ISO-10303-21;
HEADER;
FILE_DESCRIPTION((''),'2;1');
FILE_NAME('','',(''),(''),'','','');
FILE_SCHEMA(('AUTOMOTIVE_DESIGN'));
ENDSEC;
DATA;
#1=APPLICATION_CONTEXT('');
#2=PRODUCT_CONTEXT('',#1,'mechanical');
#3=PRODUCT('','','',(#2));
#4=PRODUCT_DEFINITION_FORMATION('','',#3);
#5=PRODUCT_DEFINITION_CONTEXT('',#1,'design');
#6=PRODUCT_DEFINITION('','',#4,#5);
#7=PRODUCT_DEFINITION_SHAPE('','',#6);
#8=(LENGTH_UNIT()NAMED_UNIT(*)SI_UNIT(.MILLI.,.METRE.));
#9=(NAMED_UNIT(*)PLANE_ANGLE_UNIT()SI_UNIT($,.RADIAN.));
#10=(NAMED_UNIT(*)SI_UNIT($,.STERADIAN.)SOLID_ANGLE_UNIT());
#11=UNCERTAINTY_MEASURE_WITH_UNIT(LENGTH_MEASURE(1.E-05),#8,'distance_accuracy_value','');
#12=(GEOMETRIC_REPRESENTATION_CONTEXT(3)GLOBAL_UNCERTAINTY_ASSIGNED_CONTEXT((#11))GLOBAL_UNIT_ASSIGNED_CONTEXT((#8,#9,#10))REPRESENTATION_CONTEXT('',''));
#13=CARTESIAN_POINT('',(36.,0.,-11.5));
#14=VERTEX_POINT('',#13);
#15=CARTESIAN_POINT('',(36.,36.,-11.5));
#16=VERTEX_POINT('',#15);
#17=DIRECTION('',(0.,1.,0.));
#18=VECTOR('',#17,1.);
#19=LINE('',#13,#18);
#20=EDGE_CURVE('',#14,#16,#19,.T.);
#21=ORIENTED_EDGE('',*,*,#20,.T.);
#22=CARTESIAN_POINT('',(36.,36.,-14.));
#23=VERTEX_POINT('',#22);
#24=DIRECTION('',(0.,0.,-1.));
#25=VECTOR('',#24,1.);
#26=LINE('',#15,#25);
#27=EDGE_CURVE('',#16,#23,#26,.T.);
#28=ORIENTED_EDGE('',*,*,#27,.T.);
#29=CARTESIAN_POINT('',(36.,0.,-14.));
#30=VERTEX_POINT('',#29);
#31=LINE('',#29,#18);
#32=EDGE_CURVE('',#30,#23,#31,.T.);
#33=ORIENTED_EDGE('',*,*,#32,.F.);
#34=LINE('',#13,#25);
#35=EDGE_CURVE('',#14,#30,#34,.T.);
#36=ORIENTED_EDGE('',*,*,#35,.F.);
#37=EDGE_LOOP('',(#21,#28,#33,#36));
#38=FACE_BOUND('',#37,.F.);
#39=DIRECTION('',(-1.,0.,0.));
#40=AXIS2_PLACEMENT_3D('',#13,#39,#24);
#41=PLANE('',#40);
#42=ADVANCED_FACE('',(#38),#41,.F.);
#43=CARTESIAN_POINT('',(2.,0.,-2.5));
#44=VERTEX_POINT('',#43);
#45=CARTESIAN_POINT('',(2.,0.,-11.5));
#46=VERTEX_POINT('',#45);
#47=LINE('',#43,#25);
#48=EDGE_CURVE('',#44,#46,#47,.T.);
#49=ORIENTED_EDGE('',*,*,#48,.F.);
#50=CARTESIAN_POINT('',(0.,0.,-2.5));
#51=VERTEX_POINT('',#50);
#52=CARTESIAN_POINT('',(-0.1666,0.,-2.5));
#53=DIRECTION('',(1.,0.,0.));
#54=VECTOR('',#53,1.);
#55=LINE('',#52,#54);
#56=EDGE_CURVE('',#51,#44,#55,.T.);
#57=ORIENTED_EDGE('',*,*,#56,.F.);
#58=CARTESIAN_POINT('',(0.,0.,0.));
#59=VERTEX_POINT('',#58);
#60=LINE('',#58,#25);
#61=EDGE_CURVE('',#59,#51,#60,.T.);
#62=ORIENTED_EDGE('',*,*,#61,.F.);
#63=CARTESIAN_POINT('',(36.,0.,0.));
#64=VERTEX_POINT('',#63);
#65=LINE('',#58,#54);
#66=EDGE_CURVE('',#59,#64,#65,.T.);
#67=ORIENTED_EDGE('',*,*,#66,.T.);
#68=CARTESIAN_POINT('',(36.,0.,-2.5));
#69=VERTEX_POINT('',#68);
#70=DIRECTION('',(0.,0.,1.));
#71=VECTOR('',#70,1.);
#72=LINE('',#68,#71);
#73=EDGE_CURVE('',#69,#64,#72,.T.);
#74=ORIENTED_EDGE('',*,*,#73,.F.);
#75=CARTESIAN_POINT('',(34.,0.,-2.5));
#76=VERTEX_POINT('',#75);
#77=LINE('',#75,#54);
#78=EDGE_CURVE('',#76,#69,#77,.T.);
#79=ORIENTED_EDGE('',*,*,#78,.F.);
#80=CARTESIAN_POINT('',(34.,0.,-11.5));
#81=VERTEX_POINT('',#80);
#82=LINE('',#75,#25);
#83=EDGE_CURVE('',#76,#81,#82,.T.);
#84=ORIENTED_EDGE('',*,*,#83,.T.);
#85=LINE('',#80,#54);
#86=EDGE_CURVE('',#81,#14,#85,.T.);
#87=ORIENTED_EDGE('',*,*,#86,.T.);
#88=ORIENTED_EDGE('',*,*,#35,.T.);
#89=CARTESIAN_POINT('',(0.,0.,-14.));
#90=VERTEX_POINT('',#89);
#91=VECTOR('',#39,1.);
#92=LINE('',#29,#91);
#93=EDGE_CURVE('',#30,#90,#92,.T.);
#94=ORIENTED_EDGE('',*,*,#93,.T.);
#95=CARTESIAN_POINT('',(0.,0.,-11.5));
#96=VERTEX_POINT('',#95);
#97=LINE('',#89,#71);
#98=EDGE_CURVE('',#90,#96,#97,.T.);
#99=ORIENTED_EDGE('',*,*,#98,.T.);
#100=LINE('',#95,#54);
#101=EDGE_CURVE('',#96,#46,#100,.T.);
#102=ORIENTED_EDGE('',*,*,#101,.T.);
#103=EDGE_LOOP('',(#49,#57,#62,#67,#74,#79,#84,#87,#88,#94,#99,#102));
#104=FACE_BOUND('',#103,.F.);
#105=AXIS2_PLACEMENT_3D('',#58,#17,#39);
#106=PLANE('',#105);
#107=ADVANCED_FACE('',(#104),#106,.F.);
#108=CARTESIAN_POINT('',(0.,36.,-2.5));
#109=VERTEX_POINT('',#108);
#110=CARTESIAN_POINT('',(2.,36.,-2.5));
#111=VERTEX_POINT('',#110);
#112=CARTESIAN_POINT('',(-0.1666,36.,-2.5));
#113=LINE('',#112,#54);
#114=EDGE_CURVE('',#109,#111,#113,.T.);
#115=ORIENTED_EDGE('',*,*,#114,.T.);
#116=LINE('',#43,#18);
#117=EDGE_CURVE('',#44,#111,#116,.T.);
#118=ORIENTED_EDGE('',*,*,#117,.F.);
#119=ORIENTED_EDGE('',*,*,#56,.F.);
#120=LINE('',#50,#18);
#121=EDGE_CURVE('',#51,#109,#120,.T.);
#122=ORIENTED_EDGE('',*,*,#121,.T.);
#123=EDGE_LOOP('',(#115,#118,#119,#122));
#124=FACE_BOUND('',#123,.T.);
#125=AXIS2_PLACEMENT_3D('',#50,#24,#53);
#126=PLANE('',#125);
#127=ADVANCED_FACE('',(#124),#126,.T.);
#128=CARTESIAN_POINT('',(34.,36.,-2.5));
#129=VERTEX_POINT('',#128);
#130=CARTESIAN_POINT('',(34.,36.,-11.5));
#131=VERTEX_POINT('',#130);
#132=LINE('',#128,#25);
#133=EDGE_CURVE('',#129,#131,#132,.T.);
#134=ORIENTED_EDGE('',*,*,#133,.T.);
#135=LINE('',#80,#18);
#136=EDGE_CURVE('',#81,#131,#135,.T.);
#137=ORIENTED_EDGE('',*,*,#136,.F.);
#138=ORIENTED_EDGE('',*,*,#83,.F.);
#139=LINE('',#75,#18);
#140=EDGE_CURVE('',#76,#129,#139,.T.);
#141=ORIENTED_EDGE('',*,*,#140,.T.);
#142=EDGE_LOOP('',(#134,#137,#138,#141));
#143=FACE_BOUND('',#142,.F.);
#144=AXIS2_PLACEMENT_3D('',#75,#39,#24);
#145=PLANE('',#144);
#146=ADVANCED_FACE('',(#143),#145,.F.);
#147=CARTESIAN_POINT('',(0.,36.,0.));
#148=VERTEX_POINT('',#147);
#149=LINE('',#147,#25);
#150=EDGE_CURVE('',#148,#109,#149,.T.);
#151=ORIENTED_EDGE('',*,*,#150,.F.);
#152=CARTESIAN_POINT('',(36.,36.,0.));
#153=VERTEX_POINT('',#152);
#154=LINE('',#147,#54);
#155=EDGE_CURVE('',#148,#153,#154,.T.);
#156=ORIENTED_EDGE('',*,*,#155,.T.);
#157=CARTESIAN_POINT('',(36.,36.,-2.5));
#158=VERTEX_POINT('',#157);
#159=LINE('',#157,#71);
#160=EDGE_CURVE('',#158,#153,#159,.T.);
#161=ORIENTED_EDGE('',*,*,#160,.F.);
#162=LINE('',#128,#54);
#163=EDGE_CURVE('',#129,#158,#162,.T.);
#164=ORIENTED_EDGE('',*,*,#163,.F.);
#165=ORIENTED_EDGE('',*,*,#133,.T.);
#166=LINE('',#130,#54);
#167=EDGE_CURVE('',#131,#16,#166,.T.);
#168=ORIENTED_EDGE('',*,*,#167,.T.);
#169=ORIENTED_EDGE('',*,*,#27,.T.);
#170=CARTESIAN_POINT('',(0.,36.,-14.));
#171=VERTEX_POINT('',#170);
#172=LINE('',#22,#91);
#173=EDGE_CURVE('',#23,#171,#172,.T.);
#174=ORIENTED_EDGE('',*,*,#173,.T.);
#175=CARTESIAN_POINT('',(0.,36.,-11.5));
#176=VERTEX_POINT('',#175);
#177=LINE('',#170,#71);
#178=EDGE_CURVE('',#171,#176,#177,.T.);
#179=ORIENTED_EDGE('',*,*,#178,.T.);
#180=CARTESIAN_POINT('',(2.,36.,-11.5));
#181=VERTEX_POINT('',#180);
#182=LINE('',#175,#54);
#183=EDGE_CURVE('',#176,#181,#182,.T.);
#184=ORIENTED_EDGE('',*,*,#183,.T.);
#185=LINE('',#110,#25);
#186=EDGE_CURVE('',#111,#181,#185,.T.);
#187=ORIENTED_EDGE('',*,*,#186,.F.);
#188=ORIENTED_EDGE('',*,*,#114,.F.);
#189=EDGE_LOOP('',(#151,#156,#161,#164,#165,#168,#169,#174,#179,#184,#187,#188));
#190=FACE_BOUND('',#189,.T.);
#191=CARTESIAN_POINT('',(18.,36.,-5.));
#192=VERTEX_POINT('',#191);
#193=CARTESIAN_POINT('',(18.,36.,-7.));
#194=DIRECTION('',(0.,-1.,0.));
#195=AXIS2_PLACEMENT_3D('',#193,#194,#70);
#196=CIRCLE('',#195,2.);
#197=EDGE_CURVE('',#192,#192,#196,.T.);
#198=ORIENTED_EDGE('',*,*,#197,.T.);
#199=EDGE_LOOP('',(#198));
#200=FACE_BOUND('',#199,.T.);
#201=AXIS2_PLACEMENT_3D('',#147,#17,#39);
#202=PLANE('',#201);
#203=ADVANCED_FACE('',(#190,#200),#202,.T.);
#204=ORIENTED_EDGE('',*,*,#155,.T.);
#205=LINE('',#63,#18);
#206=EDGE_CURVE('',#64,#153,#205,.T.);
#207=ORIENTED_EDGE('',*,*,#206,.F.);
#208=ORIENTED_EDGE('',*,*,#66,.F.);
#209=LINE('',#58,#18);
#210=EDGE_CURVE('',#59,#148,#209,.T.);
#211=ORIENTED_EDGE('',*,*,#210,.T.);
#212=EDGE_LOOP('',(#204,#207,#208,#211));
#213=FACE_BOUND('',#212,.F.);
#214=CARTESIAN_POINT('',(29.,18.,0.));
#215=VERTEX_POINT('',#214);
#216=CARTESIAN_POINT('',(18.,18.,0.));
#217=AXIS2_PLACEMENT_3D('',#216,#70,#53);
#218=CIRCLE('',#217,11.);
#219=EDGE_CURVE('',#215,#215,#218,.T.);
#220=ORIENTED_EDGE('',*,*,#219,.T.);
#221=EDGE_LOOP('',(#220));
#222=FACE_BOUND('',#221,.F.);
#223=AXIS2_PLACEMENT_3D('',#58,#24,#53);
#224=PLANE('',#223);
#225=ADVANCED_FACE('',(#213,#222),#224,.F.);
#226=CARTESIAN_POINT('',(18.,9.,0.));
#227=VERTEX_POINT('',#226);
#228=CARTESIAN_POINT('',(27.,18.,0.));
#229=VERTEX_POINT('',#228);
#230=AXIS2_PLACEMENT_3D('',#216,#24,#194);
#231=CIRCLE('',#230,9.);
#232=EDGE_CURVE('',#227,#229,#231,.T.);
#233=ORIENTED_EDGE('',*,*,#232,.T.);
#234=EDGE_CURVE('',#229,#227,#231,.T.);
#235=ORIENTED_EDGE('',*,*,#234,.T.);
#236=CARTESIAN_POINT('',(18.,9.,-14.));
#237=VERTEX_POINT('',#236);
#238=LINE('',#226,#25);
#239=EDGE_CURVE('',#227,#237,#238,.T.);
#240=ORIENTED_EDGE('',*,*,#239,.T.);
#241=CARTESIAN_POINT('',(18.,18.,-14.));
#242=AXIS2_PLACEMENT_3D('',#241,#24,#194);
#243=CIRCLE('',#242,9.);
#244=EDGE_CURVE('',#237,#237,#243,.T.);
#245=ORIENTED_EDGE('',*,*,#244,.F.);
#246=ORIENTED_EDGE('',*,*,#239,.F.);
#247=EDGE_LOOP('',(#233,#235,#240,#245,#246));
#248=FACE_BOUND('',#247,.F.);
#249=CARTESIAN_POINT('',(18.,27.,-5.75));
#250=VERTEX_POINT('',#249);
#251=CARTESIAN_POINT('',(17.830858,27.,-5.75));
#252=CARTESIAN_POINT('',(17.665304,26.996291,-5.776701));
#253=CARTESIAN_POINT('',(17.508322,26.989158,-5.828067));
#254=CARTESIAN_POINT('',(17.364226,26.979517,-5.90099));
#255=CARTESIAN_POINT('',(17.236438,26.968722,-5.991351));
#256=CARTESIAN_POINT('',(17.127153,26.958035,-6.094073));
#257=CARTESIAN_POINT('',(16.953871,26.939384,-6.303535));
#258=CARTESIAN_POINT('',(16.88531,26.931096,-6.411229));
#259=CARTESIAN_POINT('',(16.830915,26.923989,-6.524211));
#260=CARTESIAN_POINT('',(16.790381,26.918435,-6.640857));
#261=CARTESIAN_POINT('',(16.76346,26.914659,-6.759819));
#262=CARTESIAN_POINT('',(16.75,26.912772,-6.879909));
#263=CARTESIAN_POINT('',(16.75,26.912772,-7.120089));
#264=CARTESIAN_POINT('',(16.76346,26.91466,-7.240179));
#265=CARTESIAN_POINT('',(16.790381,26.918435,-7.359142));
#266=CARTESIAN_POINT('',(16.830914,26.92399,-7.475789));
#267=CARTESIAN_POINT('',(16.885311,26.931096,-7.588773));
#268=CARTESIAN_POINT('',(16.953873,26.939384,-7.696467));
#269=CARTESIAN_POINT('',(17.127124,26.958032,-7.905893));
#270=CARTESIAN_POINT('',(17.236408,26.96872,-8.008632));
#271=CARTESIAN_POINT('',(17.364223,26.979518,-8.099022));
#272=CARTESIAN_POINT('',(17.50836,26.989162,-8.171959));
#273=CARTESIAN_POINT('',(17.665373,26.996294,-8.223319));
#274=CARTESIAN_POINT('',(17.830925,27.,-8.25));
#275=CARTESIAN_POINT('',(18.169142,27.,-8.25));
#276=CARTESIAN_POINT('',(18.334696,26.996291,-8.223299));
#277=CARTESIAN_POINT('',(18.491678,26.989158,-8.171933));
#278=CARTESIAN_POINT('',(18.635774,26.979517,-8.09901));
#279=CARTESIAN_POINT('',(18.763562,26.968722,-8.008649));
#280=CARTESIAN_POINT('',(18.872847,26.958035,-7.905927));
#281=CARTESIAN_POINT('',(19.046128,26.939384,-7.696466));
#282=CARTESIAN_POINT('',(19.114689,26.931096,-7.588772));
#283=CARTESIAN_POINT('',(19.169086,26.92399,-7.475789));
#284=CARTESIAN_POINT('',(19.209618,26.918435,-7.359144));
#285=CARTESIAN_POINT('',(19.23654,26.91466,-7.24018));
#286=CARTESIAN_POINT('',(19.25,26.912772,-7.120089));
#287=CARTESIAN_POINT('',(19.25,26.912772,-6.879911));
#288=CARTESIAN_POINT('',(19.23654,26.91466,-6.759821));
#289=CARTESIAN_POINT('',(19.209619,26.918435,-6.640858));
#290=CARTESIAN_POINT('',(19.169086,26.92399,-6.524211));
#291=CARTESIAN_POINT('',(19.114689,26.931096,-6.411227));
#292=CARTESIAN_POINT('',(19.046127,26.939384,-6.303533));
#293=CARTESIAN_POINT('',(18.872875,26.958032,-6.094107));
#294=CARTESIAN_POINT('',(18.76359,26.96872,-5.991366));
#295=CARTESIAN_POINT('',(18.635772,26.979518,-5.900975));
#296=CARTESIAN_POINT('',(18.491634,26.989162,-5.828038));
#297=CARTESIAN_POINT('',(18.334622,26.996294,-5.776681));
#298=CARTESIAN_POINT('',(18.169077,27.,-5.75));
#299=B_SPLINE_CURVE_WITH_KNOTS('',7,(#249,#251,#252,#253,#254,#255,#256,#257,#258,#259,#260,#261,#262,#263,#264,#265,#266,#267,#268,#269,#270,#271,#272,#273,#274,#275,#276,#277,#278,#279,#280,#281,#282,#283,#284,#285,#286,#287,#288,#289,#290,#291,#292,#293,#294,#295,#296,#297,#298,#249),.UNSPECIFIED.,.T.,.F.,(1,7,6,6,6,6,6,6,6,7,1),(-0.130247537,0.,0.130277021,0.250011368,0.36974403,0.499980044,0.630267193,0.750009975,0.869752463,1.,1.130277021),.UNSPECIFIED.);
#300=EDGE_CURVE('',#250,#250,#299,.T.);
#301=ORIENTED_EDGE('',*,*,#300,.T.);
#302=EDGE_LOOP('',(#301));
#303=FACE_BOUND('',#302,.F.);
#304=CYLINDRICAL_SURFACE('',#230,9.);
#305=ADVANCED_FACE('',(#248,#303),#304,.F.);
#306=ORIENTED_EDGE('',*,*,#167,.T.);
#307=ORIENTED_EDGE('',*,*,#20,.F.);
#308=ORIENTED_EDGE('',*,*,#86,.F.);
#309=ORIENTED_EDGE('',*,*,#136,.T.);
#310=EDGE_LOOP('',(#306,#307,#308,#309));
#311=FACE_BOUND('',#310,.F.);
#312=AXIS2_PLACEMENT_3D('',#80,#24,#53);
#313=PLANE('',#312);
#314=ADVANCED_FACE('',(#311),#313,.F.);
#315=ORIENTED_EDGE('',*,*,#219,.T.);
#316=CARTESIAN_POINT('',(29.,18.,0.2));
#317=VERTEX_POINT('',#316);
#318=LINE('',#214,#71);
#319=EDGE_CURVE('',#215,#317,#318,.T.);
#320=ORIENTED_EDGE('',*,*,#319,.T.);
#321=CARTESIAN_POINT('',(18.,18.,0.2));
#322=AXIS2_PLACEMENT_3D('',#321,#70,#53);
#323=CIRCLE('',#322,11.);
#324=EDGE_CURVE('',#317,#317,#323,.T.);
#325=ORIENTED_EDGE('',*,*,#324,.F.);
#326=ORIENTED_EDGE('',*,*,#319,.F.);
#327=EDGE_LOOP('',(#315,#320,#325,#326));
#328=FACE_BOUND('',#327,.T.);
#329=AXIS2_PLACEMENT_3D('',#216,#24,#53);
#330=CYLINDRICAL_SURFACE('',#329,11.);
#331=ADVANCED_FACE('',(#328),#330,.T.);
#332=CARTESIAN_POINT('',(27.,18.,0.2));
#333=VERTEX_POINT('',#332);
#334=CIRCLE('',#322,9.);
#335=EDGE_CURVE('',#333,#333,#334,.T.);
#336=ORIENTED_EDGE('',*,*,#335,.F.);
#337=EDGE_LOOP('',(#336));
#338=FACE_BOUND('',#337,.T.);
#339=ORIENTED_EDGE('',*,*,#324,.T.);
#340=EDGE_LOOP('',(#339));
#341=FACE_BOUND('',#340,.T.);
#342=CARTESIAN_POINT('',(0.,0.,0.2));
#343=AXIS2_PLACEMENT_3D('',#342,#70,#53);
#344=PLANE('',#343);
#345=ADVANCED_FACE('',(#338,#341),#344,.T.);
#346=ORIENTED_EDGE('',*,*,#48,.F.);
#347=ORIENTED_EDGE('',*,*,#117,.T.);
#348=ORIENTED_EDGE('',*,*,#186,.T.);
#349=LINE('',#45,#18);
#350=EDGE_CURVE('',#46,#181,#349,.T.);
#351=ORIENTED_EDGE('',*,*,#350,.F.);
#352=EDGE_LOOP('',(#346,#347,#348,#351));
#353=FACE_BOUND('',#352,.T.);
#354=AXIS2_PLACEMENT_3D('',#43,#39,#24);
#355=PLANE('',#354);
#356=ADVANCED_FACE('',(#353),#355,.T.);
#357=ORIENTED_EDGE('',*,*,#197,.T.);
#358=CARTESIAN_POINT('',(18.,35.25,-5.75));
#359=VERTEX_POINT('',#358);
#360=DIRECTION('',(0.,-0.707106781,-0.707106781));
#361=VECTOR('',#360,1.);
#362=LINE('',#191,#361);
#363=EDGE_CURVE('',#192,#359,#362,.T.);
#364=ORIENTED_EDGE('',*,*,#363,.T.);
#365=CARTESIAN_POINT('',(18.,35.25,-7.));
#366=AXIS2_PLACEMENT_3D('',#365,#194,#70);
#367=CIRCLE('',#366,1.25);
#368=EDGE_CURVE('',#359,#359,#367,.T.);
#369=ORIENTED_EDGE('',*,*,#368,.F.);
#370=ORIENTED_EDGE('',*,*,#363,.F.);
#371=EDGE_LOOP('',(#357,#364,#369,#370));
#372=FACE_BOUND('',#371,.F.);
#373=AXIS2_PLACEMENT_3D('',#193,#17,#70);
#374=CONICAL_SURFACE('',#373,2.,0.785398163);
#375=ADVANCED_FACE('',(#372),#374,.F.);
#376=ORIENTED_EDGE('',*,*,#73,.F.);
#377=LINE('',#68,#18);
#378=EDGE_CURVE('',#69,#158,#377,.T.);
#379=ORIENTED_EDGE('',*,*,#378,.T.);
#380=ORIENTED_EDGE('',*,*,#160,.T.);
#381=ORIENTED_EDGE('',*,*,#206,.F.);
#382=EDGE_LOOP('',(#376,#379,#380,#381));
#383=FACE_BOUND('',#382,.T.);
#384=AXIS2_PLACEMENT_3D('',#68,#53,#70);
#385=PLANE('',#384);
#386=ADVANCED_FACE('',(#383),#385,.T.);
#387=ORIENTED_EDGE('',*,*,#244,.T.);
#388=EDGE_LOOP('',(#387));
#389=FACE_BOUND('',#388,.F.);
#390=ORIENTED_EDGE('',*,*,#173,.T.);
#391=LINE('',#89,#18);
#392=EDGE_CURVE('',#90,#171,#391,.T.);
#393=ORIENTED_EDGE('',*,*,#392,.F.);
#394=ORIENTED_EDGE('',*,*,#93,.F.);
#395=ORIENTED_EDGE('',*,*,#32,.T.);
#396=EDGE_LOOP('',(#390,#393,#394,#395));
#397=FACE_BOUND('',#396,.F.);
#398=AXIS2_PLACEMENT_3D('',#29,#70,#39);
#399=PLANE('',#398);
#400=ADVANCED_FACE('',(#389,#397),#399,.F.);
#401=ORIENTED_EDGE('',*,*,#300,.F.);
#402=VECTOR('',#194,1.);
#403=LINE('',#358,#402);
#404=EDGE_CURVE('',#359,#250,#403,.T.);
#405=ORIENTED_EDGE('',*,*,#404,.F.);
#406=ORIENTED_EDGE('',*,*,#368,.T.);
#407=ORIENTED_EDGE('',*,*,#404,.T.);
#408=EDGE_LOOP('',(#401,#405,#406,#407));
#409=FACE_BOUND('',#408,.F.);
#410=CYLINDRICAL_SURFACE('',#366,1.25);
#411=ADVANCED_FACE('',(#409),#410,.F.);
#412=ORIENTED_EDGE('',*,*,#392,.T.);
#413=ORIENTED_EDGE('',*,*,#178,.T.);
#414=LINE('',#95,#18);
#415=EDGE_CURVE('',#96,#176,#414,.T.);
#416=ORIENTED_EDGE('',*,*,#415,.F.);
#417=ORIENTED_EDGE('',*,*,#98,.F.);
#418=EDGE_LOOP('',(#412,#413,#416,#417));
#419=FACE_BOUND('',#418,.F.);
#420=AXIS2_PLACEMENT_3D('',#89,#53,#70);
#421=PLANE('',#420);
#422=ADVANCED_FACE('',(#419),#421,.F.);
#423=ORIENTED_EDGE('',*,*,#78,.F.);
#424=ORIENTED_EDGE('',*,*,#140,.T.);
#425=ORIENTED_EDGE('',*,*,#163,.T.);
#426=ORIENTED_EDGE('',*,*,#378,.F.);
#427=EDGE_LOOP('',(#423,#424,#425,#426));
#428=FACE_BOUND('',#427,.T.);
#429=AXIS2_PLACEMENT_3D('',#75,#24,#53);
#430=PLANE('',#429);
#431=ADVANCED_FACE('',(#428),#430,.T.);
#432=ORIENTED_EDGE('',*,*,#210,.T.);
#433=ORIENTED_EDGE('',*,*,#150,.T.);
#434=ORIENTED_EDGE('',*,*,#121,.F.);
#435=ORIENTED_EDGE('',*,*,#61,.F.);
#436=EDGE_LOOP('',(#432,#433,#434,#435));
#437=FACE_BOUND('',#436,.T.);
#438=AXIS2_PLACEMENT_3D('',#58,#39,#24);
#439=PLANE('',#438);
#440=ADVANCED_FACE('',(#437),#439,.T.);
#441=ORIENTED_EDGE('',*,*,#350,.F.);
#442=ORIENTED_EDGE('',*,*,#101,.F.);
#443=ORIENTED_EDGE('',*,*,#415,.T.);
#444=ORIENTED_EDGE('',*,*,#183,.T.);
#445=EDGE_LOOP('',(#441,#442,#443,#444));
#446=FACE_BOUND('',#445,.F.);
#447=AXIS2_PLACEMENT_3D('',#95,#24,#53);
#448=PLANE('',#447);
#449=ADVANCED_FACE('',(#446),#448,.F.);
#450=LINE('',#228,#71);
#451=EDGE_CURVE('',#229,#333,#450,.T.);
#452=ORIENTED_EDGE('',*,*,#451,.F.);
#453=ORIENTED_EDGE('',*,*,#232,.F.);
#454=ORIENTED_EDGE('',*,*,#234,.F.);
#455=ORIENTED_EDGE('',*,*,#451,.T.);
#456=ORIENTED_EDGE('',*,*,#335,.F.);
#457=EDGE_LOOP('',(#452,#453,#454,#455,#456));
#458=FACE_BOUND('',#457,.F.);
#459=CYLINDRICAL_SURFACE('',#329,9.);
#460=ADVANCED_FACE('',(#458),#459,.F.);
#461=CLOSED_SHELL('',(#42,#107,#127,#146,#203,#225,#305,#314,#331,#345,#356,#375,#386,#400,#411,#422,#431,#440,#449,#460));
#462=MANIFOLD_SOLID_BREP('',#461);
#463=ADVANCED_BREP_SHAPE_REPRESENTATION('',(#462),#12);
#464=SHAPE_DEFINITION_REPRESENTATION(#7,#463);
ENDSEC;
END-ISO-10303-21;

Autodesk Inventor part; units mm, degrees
ref_plane "YZ Plane" through (0, 0, 0) normal (1, 0, 0) x (0, 1, 0)
ref_plane "XZ Plane" through (0, 0, 0) normal (0, 1, 0) x (-1, 0, 0)
ref_plane "XY Plane" through (0, 0, 0) normal (0, 0, 1) x (1, 0, 0)
sketch "Sketch1" plane through (0, 0, 0) normal (0, 1, 0) x (-1, 0, 0)
  line L0 (0, 0) -> (-36, 0)
  line L1 (-36, -14) -> (0, -14)
  line L2 (0, 0) -> (0, -2.5)
  line L3 (-2, -2.5) -> (-2, -11.5)
  line L4 (-34, -2.5) -> (-34, -11.5)
  line L5 (0.1666, -2.5) -> (-2, -2.5)
  line L6 (0, -14) -> (0, -11.5)
  line L7 (0, -11.5) -> (-2, -11.5)
  line L8 (-34, -11.5) -> (-36, -11.5)
  line L9 (-36, -11.5) -> (-36, -14)
  line L10 (-34, -2.5) -> (-36, -2.5)
  line L11 (-36, -2.5) -> (-36, 0)
  dimension "d1" = 14
  dimension "d2" = 36
  dimension "d3" = 2.5
  dimension "d4" = 9
  dimension "d5" = 9
  dimension "d6" = 32
  dimension "d8" = 9
  dimension "d9" = 36
extrude "Extrusion1" add sketch "Sketch1" along normal blind 36
sketch "Sketch2" plane through (0, 36, 0) normal (0, 1, 0) x (1, 0, 0)
  circle A0 centre (18, 7) radius 1.25
  line L0 (34, 2.5) -> (34, 11.5) projected
  line L1 (0, 0) -> (36, 0) projected
  dimension "d12" = 2.5
  dimension "d13" = 16
  dimension "d14" = 7
sketch "Sketch3" plane through (0, 0, 0) normal (0, 0, 1) x (1, 0, 0)
  circle A0 centre (18, 18) radius 11
  circle A1 centre (18, 18) radius 9
  line L0 (0, 0) -> (36, 0) projected
  line L1 (0, 0) -> (0, 36) projected
  dimension "d15" = 22
  dimension "d16" = 18
  dimension "d17" = 18
  dimension "d18" = 18
hole "Hole1" at (18, 18, 0) direction (0, 0, -1) diameter 18 end through all
extrude "Extrusion2" add sketch "Sketch3" along normal blind 0.2
hole "Hole2" at (18, 36, -7) direction (0, -1, 0) diameter 2.5 end up to surface countersink diameter 4 countersink angle 90
properties part number "HUDSON 1-08 AXLE BLOCK"
